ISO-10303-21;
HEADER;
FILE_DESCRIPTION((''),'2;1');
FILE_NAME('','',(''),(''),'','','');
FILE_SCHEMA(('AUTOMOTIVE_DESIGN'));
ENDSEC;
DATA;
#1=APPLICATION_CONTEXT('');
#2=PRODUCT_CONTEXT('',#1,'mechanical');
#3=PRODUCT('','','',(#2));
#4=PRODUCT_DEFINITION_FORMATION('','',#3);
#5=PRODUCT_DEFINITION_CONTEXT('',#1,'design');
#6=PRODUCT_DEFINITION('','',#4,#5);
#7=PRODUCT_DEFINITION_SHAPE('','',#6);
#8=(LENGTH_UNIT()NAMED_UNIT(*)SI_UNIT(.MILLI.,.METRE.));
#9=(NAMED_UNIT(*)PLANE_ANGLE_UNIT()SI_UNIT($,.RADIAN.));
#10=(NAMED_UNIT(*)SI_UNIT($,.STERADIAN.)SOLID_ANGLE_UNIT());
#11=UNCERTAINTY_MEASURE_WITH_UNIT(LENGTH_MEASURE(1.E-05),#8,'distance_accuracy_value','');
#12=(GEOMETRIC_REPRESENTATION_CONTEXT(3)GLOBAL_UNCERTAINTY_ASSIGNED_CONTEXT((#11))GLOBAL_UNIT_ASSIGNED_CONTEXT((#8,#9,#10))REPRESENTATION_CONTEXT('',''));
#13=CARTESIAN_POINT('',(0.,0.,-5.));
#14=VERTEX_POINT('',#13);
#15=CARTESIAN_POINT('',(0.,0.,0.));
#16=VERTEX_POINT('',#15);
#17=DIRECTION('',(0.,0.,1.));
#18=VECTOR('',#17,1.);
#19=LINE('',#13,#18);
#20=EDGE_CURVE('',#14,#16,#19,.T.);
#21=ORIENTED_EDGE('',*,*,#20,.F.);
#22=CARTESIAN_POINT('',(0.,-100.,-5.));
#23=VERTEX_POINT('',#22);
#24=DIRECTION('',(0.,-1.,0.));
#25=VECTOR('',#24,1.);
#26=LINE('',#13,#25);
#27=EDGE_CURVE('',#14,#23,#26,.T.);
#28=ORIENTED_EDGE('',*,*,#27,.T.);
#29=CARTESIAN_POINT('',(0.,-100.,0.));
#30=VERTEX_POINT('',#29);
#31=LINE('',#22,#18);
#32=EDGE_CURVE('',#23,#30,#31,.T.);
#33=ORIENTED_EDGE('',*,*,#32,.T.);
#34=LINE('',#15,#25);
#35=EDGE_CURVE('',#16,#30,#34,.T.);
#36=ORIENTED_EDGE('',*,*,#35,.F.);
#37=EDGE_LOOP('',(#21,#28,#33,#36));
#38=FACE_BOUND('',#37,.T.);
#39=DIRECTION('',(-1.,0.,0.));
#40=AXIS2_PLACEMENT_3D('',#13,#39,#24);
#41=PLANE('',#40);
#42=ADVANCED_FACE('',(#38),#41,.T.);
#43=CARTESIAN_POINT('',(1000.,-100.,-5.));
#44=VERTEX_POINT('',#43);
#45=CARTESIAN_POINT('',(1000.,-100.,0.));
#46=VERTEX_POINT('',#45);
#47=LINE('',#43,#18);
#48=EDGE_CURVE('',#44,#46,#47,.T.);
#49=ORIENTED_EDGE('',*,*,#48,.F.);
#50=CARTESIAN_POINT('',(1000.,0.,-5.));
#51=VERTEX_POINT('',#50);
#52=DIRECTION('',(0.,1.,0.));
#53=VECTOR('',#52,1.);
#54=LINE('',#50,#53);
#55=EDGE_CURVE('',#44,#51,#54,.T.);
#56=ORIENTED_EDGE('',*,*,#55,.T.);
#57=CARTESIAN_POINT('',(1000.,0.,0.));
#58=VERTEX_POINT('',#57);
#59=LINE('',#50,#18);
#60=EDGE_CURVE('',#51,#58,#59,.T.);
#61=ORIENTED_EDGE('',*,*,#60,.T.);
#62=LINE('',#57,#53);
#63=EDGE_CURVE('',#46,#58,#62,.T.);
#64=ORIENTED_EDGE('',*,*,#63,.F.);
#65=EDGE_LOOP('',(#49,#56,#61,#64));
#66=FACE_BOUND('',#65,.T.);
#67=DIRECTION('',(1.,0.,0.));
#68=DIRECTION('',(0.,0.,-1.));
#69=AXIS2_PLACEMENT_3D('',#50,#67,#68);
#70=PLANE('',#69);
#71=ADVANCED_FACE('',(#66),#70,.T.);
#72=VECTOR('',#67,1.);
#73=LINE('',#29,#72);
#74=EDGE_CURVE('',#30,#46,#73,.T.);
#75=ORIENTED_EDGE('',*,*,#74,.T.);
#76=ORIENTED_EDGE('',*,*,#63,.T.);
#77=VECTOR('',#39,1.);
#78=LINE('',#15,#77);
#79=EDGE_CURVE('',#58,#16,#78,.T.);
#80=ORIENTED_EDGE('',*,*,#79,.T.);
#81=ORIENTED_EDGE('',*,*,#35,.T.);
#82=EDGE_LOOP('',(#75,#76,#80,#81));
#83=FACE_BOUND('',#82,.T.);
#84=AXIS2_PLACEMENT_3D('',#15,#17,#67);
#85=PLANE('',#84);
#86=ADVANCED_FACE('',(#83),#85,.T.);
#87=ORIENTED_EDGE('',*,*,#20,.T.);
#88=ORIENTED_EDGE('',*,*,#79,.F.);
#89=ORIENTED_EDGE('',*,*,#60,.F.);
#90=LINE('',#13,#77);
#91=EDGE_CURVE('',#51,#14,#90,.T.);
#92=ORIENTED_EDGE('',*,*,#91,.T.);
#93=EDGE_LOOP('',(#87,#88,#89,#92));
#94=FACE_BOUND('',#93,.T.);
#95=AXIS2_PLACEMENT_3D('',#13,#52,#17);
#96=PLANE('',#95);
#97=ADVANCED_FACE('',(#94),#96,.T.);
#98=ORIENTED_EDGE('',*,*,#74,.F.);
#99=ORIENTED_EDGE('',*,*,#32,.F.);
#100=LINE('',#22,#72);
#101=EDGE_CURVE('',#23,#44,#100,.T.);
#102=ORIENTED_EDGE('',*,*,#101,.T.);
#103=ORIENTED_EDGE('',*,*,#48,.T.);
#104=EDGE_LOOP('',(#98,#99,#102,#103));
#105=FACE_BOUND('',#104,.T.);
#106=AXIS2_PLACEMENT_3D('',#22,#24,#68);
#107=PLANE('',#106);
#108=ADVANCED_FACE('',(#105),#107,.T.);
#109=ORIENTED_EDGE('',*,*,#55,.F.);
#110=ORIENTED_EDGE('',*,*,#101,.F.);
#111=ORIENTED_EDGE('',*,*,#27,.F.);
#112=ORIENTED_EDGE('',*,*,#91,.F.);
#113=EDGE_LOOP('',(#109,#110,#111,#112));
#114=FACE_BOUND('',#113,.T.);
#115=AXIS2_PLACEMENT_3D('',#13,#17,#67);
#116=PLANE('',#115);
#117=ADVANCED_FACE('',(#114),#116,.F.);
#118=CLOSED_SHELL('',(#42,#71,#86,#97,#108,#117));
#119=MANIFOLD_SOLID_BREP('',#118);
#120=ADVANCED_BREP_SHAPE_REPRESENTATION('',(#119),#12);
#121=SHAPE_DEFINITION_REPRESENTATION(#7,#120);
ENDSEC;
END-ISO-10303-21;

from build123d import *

# Parameters (mm, degrees)
IZIM1_W            = 1000
IZIM1_H            = 100
TABAN_FLAN_1_DEPTH = 5


# Sheet-metal steps are written as plain solids
with BuildPart() as part:
    # Çizim1 → Taban-Flanş1 (new body)
    with BuildSketch(Plane.XY):
        with Locations((500, -50)):
            Rectangle(IZIM1_W, IZIM1_H)
    extrude(amount=-TABAN_FLAN_1_DEPTH)


solid = part.part
